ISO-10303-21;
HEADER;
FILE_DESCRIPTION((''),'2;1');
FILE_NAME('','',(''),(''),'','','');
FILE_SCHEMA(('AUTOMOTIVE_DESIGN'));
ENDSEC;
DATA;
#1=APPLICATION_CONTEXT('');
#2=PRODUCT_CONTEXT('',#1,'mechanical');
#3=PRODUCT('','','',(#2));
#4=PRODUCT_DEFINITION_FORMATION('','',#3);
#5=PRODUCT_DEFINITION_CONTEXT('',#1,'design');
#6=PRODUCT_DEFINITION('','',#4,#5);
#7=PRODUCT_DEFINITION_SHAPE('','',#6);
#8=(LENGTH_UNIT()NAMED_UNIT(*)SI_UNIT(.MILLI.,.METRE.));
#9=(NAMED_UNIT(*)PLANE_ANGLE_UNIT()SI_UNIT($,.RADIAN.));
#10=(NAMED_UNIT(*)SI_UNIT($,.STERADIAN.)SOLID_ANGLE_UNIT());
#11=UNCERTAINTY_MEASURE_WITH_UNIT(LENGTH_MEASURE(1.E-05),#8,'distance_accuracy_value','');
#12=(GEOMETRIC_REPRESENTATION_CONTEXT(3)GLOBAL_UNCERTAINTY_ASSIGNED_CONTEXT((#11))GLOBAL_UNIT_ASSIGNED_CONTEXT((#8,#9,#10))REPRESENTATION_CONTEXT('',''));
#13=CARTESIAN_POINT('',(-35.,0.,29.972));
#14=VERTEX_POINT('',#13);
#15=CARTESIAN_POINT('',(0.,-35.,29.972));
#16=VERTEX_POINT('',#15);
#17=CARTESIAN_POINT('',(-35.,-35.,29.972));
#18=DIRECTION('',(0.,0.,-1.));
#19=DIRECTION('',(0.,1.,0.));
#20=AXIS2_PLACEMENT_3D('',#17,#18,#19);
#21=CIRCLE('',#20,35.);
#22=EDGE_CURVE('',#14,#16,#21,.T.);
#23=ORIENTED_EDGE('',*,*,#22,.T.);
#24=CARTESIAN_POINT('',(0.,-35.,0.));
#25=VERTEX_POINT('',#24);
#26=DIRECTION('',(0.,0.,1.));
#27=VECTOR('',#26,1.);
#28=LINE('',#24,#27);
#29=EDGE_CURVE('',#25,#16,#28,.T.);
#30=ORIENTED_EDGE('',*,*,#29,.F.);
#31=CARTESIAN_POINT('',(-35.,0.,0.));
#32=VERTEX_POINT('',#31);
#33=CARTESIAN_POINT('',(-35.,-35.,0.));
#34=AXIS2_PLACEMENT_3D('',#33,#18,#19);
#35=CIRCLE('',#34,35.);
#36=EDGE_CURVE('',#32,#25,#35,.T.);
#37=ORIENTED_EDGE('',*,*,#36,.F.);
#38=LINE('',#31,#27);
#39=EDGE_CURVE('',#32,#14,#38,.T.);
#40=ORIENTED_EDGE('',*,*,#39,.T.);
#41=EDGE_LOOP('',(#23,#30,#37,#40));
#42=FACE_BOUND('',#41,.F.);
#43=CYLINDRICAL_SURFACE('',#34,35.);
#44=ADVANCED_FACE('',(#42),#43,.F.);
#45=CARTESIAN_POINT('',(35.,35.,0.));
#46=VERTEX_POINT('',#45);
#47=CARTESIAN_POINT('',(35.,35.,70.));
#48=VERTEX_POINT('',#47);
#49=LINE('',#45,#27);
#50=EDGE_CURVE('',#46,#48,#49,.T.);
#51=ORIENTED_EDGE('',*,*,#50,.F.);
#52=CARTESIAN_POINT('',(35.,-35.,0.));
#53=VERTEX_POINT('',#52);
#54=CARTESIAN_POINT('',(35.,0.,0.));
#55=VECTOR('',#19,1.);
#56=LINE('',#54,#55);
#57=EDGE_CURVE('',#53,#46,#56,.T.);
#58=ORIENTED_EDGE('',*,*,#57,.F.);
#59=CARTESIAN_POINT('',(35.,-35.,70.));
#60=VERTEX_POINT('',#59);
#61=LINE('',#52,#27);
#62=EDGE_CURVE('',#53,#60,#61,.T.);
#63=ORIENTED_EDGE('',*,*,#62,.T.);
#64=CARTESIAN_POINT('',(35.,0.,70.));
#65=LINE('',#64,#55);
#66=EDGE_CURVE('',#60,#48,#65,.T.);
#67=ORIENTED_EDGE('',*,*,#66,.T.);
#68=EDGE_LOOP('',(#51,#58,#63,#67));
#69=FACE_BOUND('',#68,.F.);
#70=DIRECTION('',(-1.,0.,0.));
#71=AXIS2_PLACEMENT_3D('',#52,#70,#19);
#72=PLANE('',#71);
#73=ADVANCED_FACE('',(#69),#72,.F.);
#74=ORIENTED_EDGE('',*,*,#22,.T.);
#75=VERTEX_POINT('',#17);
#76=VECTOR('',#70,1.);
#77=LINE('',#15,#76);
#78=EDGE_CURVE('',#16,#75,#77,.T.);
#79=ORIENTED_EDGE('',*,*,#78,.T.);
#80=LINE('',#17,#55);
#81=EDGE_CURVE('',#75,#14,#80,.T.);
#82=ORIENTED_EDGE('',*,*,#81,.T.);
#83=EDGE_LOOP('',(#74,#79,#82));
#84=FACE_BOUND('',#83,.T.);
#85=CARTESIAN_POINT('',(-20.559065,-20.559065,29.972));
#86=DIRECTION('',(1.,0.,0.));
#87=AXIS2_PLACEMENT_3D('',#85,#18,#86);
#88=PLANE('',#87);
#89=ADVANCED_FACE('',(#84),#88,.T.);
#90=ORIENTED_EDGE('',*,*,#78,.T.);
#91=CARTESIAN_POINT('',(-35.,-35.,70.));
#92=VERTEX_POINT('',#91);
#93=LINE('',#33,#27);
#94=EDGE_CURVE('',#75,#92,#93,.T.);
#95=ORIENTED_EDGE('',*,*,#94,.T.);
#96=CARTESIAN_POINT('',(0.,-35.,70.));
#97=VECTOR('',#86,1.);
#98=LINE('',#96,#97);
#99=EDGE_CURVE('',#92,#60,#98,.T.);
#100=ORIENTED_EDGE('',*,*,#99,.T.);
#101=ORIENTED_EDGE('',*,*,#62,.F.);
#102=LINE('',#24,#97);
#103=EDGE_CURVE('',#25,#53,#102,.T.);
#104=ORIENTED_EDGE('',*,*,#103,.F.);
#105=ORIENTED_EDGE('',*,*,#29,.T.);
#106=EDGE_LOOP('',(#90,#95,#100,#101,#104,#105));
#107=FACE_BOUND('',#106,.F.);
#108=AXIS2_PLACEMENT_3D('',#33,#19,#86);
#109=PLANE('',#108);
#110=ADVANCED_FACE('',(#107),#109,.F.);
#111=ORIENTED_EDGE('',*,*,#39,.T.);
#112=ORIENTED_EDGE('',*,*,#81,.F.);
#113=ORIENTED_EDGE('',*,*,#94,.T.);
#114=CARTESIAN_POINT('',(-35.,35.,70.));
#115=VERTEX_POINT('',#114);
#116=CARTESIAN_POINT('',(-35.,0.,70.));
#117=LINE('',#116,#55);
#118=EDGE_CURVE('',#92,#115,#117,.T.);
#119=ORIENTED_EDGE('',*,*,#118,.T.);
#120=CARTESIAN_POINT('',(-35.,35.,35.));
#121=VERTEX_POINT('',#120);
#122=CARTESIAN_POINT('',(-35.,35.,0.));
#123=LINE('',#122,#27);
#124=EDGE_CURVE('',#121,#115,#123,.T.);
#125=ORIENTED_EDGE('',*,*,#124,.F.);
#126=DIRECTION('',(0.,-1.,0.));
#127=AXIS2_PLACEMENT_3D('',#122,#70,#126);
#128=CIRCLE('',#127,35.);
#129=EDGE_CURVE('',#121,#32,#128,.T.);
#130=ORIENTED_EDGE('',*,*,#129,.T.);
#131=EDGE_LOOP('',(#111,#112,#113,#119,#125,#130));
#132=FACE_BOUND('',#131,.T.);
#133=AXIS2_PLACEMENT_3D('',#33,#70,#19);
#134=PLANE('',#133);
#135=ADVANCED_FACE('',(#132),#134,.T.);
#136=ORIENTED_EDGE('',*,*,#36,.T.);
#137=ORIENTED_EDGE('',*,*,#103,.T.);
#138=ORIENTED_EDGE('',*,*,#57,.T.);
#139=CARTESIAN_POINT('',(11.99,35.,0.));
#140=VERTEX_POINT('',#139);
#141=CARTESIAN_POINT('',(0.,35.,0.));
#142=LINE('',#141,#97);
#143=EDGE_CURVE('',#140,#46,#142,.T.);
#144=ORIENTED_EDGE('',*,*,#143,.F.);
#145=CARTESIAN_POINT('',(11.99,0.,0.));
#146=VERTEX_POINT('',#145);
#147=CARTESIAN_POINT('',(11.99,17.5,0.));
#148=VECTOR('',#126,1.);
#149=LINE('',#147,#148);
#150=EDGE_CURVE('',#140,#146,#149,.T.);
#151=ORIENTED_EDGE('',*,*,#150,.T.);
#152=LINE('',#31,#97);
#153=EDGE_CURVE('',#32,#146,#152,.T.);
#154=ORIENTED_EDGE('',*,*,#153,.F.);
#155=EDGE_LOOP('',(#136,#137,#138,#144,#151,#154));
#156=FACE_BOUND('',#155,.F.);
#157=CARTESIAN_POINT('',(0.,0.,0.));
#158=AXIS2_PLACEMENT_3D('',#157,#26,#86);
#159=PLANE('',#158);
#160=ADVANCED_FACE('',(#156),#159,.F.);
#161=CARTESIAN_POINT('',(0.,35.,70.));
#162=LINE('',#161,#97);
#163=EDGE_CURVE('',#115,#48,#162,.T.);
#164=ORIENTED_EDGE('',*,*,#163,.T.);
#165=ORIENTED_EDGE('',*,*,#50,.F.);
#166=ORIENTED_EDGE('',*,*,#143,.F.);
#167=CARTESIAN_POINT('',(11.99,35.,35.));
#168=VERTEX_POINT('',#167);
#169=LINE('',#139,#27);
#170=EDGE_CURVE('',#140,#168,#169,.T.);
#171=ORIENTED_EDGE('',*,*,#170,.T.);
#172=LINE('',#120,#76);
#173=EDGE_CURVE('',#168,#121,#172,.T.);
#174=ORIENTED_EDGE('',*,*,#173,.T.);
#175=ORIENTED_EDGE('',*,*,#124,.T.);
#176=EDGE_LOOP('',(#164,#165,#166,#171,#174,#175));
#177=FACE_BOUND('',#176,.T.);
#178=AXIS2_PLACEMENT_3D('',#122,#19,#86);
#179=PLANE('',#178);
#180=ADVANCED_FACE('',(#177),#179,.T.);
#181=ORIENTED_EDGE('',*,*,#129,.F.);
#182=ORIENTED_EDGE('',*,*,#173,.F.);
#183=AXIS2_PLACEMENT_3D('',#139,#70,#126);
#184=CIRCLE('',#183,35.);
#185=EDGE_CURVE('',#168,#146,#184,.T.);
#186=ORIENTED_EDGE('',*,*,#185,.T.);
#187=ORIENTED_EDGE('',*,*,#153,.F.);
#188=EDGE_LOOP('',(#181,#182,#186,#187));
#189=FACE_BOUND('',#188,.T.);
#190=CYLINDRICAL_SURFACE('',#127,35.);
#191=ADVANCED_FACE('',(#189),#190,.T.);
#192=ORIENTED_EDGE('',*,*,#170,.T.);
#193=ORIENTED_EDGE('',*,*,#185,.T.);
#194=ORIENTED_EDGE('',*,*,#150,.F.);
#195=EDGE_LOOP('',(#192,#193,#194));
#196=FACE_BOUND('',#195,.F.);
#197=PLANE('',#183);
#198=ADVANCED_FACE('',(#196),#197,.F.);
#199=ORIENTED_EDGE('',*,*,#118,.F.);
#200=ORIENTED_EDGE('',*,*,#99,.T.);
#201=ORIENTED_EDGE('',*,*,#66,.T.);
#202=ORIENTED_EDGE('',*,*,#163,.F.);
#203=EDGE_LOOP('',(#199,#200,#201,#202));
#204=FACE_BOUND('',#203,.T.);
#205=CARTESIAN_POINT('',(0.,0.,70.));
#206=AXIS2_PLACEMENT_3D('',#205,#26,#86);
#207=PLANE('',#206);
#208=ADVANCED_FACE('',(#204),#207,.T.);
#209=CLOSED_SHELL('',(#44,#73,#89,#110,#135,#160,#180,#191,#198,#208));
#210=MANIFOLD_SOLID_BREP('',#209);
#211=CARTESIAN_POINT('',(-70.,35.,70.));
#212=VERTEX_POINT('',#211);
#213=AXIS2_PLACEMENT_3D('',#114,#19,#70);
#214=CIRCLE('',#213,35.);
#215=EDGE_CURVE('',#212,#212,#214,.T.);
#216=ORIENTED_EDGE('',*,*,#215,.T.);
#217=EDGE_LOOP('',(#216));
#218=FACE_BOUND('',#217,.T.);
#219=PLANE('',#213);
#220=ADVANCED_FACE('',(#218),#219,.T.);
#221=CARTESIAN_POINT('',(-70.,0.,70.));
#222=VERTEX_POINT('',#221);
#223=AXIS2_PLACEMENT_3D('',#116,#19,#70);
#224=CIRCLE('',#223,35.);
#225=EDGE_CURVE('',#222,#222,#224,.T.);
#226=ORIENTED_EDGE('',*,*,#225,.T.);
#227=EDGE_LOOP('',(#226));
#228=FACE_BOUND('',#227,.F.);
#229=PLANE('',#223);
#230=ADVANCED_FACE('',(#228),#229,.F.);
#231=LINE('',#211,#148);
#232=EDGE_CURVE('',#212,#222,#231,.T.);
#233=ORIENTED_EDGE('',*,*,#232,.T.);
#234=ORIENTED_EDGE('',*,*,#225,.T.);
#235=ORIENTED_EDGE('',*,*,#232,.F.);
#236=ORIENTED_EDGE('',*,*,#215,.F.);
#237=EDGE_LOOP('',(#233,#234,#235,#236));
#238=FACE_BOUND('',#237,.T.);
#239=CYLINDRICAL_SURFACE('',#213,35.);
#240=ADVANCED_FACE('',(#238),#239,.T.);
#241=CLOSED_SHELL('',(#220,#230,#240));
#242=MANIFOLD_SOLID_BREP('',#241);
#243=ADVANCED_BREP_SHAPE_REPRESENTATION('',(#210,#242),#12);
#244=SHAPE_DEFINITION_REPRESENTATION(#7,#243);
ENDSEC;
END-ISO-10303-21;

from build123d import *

# Parameters (mm, degrees)
F0_W     = 70
F0_H     = 70
F1_DEPTH = 70
F3_DEPTH = 29.972
F4_R     = 35
F5_DEPTH = 35
F6_R     = 35
F7_DEPTH = 46.99


with BuildPart() as f1:
    # F0 (on Top) → F1 (new body)
    with BuildSketch(Plane.XY):
        Rectangle(F0_W, F0_H)
    extrude(amount=F1_DEPTH)

    # F2 (on face) → F3 (cut)
    with BuildSketch(Plane(origin=(0, 0, 0), x_dir=(1, 0, 0), z_dir=(0, 0, -1))):
        with BuildLine():
            ThreePointArc((-35, 0), (-10.2512626585, 10.2512626585), (0, 35))
            Line((0, 35), (-35, 35))
            Line((-35, 35), (-35, 0))
        make_face()
    extrude(amount=-F3_DEPTH, mode=Mode.SUBTRACT)

    # F6 (on face) → F7 (join)
    with BuildSketch(Plane(origin=(-35, 0, 0), x_dir=(0, -1, 0), z_dir=(-1, 0, 0))):
        with Locations((-35, 0)):
            Circle(F6_R)
    extrude(amount=-F7_DEPTH)


with BuildPart() as f5:
    # F4 (on face) → F5 (new body)
    with BuildSketch(Plane(origin=(0, 35, 0), x_dir=(-1, 0, 0), z_dir=(0, 1, 0))):
        with Locations((35, 70)):
            Circle(F4_R)
    extrude(amount=-F5_DEPTH)


solid = Compound([f1.part, f5.part])
